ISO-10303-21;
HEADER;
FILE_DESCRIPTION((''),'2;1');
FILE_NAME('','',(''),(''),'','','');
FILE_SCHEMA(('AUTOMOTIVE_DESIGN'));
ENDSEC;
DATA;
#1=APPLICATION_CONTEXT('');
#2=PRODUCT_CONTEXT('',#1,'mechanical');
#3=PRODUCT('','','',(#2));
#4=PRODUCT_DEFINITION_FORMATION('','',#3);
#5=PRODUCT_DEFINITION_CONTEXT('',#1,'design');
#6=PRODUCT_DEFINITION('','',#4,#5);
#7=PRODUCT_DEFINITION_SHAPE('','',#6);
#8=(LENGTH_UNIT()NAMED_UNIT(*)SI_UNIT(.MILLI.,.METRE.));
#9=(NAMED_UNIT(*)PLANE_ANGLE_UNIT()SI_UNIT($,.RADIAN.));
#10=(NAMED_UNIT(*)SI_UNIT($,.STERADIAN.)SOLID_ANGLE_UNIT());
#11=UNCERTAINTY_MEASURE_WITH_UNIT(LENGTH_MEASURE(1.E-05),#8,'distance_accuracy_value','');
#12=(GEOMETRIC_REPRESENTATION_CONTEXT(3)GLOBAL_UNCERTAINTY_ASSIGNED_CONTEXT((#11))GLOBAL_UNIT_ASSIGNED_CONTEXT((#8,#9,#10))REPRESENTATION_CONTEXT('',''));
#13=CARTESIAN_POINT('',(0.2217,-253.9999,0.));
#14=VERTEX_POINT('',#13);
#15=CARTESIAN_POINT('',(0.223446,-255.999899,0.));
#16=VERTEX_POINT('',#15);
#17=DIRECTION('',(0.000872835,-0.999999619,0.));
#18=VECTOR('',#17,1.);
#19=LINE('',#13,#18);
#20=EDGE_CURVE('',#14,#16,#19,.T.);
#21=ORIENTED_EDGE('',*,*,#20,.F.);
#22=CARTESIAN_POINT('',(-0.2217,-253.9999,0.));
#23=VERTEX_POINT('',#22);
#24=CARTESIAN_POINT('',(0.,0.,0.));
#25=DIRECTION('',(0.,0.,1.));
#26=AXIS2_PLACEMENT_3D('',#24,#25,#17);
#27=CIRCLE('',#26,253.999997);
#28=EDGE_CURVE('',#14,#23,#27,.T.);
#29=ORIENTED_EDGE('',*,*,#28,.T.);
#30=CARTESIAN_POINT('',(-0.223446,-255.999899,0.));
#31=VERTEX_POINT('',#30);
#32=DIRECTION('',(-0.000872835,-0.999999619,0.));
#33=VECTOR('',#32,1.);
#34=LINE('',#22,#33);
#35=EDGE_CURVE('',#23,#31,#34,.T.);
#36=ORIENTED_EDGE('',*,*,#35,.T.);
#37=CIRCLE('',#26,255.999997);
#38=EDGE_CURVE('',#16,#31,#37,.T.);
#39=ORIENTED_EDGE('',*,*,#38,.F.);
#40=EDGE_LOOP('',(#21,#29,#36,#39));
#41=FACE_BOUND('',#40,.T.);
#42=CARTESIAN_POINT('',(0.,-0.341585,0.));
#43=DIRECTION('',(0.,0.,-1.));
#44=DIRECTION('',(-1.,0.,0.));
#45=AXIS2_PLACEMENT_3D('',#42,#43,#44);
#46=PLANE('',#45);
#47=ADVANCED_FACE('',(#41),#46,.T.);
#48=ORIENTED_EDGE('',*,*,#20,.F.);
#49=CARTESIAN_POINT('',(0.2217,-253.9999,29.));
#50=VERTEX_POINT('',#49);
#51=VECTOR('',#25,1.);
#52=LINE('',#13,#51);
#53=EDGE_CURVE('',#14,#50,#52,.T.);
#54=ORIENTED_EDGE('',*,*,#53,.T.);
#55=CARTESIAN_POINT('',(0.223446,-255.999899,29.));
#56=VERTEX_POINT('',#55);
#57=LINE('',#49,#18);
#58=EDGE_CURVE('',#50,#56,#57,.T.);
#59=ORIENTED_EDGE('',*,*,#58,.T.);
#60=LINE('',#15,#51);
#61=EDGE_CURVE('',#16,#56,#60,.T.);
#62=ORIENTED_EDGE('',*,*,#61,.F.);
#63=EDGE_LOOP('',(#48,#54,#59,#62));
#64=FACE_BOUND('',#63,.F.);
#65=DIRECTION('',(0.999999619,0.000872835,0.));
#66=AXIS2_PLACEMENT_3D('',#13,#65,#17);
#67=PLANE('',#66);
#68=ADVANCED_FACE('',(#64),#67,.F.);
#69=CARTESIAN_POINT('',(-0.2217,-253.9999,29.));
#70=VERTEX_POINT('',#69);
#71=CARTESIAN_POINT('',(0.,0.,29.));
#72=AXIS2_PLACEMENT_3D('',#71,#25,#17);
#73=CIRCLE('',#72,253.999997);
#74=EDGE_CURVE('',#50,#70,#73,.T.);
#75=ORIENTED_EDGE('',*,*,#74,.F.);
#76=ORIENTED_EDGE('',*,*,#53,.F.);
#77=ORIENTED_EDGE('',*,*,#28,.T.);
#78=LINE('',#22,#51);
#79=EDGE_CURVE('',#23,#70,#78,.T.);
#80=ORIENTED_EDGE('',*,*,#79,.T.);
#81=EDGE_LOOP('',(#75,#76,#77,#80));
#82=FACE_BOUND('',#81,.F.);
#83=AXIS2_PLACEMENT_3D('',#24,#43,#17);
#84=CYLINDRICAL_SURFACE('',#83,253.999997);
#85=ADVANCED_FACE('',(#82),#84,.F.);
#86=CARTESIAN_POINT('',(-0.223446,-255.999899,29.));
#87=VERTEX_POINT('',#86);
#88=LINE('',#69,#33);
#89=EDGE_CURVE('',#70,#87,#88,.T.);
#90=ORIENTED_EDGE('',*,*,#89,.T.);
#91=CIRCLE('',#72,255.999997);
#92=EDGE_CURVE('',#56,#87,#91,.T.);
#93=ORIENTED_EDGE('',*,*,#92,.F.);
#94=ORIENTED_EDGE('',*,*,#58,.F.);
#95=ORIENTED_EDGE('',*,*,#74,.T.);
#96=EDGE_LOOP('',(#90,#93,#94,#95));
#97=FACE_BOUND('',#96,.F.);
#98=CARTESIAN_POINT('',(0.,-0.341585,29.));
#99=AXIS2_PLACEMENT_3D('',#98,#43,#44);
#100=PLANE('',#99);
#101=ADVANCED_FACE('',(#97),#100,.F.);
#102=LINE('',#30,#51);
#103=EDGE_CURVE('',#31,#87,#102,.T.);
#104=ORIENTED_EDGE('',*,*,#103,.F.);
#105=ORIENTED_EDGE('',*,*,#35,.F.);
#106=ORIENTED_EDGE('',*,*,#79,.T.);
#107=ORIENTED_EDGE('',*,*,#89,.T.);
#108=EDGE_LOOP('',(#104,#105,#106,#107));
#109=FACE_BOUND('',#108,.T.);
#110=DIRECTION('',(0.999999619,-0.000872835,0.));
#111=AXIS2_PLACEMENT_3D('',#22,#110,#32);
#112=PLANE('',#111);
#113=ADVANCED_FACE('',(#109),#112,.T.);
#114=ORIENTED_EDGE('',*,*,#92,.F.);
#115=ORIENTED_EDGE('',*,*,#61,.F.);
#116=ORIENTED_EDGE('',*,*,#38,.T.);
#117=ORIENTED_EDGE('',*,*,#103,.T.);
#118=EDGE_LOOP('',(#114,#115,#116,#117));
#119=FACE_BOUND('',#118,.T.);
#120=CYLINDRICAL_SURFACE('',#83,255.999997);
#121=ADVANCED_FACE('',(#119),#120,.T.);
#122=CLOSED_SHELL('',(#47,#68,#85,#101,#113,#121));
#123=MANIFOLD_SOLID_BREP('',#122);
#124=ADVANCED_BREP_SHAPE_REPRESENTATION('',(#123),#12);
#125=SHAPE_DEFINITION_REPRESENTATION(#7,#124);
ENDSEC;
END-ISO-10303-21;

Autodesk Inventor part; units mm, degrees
ref_plane "YZ Plane" through (0, 0, 0) normal (1, 0, 0) x (0, 1, 0)
ref_plane "XZ Plane" through (0, 0, 0) normal (0, 1, 0) x (-1, 0, 0)
ref_plane "XY Plane" through (0, 0, 0) normal (0, 0, 1) x (1, 0, 0)
sketch "Sketch1" plane through (0, 0, 0) normal (0, 0, 1) x (1, 0, 0)
  arc A0 (0.2217, -253.9999) -> (-0.2217, -253.9999) centre (0, 0) ccw
  line L0 (0, 0) -> (-0.2217, -253.9999) construction
  line L1 (0, 0) -> (0, 241.44) construction
  line L2 (0, 0) -> (0.2217, -253.9999) construction
  arc A1 (-0.2217, -253.9999) -> (0.2217, -253.9999) centre (0, 0) ccw construction
  point P0 (-207.8461, 120)
  point P1 (207.8461, 120)
  dimension "d28" = 508
  dimension "d30" = 359.9
contour flange "Contour Flange1" sketch "Sketch1" thickness 2 bend radius 2 width 29 along (0, 0, 1) mid plane no both sides no wall seen from (0, 254, 0) lies toward (0, 1, 0) curves A0
bend "Bend1"
corner "Corner1"
equation "\"d28\" = Колесо_диам_3"
equation "\"d31\" = Thickness"
equation "\"d32\" = BendReliefWidth"
equation "\"d33\" = BendReliefDepth"
equation "\"d34\" = MinimumRemnant"
equation "\"d35\" = TransitionRadius"
equation "\"d37\" = BendRadius"
equation "\"d39\" = CornerReliefSize"
equation "\"d40\" = GapSize"
equation "\"d41\" = JacobiRadiusSize"
equation "\"BendRadius\" = Thickness"
equation "\"BendReliefWidth\" = Thickness"
equation "\"BendReliefDepth\" = 0.5 * Thickness"
equation "\"CornerReliefSize\" = 4 * Thickness"
equation "\"MinimumRemnant\" = 2 * Thickness"
equation "\"TransitionRadius\" = BendRadius"
equation "\"JacobiRadiusSize\" = BendRadius"
equation "\"GapSize\" = Thickness"
equation "\"Колесо_диам_3\" = 508"
equation "\"Thickness\" = 2"
properties part number "DMF2.0 01 46 Gear axis wheel 6"
